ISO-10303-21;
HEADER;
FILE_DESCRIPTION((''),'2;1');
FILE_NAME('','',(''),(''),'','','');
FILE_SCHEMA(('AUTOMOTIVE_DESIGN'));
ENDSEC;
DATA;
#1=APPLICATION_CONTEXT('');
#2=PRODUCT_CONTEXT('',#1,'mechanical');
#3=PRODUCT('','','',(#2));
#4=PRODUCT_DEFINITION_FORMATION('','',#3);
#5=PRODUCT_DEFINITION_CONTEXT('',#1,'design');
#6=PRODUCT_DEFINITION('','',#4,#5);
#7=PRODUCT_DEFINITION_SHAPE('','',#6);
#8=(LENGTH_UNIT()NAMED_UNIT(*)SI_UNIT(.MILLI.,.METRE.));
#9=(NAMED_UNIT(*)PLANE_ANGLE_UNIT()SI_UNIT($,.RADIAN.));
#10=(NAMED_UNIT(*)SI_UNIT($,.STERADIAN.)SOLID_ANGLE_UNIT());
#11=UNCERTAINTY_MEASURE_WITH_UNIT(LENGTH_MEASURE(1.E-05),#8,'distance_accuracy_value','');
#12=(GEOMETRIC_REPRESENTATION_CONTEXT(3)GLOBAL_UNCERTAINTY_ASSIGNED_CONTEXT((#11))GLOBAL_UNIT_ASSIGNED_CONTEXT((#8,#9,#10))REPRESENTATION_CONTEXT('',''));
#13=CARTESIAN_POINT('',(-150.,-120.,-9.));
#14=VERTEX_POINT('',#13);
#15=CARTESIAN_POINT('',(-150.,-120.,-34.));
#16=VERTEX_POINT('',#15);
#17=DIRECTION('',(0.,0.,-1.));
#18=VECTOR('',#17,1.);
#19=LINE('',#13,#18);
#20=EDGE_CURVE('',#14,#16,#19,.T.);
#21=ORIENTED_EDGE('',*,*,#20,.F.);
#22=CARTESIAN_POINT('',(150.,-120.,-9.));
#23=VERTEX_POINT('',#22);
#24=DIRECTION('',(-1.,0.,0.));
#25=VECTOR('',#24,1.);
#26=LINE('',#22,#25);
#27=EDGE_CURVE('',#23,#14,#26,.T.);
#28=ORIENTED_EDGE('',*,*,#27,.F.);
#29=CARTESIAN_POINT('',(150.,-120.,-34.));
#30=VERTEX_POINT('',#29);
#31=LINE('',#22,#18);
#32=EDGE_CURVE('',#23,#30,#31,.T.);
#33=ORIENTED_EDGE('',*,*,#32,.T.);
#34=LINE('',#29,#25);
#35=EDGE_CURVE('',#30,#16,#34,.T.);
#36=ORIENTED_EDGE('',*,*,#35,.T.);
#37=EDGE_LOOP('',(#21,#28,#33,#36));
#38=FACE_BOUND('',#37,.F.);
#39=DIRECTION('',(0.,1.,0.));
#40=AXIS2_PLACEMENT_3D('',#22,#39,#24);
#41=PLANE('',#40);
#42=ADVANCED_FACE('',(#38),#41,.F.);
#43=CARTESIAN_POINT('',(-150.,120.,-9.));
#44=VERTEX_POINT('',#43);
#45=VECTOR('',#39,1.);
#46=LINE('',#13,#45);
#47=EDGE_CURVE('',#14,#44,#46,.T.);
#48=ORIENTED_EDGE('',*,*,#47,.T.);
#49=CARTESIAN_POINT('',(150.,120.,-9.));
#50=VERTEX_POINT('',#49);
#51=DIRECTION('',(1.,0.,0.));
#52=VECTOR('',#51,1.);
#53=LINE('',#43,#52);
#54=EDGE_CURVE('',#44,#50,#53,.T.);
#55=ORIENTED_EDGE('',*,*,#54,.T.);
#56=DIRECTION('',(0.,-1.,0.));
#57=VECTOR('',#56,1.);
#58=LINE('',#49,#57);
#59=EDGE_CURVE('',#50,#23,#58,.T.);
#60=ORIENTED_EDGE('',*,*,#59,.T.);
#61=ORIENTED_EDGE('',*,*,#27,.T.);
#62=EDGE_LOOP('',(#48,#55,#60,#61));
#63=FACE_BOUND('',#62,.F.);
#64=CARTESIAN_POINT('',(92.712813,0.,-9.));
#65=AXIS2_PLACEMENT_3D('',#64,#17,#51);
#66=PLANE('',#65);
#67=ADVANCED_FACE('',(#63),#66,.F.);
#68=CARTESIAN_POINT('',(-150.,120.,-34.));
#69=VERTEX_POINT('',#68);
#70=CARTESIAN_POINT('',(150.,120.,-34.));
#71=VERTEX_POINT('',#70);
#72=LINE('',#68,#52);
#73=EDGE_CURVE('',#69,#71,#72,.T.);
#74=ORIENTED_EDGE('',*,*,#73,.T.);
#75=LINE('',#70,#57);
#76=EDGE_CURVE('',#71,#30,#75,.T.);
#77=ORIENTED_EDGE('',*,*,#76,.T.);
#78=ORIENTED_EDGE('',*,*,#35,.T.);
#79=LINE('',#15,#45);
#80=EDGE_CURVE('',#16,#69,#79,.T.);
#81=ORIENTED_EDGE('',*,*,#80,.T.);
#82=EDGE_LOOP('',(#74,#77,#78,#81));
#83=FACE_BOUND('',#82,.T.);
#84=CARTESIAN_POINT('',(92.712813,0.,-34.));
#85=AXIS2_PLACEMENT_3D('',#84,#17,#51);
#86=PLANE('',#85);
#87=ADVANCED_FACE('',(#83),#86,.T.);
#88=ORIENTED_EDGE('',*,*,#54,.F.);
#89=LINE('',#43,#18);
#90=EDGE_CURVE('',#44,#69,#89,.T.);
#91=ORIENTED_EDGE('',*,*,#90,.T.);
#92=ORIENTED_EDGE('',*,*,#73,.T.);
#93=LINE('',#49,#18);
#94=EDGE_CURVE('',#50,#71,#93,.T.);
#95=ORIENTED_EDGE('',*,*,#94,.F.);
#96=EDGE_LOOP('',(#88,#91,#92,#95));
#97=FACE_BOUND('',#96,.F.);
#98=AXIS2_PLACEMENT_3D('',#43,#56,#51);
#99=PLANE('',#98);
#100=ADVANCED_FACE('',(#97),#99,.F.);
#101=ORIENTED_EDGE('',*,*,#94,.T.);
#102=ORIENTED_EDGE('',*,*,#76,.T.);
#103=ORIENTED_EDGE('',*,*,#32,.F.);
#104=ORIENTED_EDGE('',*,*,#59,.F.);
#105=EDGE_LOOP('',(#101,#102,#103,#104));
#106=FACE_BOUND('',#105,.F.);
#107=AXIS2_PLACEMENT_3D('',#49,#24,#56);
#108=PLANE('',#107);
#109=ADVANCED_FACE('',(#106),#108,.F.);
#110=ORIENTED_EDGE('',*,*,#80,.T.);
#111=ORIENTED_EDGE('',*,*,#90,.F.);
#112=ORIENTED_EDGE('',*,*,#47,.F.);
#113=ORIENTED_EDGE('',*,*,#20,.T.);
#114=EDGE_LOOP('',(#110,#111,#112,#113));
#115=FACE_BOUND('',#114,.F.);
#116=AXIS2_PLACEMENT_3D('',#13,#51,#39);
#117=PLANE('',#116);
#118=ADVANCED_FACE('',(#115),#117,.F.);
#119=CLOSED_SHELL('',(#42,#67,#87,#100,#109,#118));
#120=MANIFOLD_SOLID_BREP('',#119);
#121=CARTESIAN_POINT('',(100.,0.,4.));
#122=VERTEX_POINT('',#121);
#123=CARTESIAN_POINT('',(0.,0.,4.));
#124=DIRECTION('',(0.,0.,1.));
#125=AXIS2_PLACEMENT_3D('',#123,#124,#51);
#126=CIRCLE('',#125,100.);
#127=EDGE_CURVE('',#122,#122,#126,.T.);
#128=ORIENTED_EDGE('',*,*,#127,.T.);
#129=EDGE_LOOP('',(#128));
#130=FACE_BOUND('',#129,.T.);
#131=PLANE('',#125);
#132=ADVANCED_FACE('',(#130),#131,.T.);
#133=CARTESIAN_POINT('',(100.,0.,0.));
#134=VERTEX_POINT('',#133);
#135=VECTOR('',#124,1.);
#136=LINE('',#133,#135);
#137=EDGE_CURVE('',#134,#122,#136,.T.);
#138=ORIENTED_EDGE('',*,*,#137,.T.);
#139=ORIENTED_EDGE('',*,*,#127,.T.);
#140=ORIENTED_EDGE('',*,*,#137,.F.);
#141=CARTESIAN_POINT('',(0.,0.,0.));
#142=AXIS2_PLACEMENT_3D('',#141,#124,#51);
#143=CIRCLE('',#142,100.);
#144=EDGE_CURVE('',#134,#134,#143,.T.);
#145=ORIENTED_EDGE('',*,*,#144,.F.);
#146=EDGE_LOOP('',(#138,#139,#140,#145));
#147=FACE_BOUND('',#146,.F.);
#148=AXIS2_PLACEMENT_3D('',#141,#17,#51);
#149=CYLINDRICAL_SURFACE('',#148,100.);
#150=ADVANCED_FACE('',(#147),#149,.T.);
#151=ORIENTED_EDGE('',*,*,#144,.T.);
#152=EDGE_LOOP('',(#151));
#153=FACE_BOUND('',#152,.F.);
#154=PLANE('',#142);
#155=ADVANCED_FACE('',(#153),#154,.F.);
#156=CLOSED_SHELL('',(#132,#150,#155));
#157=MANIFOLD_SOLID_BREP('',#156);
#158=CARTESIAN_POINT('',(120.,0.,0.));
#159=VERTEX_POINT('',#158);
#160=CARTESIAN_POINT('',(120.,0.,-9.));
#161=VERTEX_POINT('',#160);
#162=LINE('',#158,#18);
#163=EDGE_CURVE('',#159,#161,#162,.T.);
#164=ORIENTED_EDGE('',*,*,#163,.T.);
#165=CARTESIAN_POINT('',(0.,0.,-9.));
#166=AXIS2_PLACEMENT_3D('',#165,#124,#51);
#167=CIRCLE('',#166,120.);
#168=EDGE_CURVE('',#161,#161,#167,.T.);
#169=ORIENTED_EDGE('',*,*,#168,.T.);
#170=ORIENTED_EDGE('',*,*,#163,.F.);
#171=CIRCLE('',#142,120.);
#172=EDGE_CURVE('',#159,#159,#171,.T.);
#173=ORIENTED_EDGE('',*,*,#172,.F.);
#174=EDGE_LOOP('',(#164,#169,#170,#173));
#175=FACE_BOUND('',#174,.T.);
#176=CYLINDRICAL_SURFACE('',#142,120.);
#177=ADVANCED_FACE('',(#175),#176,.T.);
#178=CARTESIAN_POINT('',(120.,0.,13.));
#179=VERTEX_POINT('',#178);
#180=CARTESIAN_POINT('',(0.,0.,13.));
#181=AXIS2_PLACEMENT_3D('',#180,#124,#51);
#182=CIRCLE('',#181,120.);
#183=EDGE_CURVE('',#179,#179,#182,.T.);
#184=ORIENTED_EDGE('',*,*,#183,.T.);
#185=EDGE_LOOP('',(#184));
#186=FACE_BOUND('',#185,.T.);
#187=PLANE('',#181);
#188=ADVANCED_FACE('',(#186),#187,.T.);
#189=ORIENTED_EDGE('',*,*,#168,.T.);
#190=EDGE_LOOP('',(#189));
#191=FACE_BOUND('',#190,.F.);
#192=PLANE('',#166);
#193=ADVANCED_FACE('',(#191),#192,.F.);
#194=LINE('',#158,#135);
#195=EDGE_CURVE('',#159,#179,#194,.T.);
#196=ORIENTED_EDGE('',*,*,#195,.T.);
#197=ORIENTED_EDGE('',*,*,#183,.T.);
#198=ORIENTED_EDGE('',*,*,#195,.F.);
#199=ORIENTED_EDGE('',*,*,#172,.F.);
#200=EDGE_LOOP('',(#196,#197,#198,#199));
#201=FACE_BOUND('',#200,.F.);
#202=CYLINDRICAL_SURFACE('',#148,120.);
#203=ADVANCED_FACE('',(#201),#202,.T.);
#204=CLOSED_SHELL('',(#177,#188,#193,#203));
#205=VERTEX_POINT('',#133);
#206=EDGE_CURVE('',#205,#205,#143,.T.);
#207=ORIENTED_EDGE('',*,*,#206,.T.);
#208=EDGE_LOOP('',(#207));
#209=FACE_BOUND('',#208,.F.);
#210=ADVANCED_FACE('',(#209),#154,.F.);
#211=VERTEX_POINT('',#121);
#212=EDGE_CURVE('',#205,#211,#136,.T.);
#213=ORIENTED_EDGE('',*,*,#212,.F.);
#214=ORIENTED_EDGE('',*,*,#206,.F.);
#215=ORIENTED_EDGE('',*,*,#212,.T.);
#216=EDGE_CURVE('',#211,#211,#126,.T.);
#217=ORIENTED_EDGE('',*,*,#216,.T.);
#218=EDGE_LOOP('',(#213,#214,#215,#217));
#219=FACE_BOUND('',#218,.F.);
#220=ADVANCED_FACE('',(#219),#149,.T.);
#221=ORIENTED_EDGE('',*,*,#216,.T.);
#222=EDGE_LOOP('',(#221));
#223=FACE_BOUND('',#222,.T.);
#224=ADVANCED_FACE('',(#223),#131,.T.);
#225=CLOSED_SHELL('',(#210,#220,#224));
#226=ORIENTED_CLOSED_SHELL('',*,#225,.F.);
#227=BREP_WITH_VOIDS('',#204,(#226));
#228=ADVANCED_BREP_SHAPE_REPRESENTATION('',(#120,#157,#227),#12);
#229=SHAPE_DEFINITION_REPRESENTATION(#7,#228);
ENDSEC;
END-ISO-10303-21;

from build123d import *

# Parameters (mm, degrees)
F0_R     = 120
F0_R_2   = 100
F1_DEPTH = 9
F2_DEPTH = 4
F3_DEPTH = 13
F4_DEPTH = 9
F6_DEPTH = 25


with BuildPart() as f1:
    # F0 (on Top) → F1 (new body)
    with BuildSketch(Plane.XY):
        Circle(F0_R)
        Circle(F0_R_2, mode=Mode.SUBTRACT)
        Circle(F0_R_2)
    extrude(amount=-F1_DEPTH)

    # F0 (on Top) → F3 (join)
    with BuildSketch(Plane.XY):
        Circle(F0_R)
        Circle(F0_R_2, mode=Mode.SUBTRACT)
    extrude(amount=F3_DEPTH)



with BuildPart() as f2:
    # F0 (on Top) → F2 (new body)
    with BuildSketch(Plane.XY):
        Circle(F0_R_2)
    extrude(amount=F2_DEPTH)


with BuildPart() as f1_1:
    add(f1.part)
    # F4 (add): a face of the model
    f4_faces = [f2.part.faces().sort_by_distance(p)[0] for p in [
        (0, 0, 4),
    ]]
    extrude(f4_faces, amount=F4_DEPTH)


with BuildPart() as f6:
    # F5 (on face) → F6 (new body)
    with BuildSketch(Plane(origin=(0, 0, -9), x_dir=(1, 0, 0), z_dir=(0, 0, -1))):
        with BuildLine():
            Line((150, -120), (150, 120))
            Line((150, 120), (0, 120))
            ThreePointArc((0, 120), (84.8528137424, 84.8528137424), (120, 0))
            ThreePointArc((120, 0), (84.8528137424, -84.8528137424), (0, -120))
            Line((0, -120), (150, -120))
        make_face()
        with BuildLine():
            ThreePointArc((0, -120), (-120, 0), (0, 120))
            Line((0, 120), (-150, 120))
            Line((-150, 120), (-150, -120))
            Line((-150, -120), (0, -120))
        make_face()
        with BuildLine():
            ThreePointArc((120, 0), (84.8528137424, 84.8528137424), (0, 120))
            ThreePointArc((0, 120), (-120, 0), (0, -120))
            ThreePointArc((0, -120), (84.8528137424, -84.8528137424), (120, 0))
        make_face()
    extrude(amount=F6_DEPTH)


solid = Compound([f2.part, f1_1.part, f6.part])
